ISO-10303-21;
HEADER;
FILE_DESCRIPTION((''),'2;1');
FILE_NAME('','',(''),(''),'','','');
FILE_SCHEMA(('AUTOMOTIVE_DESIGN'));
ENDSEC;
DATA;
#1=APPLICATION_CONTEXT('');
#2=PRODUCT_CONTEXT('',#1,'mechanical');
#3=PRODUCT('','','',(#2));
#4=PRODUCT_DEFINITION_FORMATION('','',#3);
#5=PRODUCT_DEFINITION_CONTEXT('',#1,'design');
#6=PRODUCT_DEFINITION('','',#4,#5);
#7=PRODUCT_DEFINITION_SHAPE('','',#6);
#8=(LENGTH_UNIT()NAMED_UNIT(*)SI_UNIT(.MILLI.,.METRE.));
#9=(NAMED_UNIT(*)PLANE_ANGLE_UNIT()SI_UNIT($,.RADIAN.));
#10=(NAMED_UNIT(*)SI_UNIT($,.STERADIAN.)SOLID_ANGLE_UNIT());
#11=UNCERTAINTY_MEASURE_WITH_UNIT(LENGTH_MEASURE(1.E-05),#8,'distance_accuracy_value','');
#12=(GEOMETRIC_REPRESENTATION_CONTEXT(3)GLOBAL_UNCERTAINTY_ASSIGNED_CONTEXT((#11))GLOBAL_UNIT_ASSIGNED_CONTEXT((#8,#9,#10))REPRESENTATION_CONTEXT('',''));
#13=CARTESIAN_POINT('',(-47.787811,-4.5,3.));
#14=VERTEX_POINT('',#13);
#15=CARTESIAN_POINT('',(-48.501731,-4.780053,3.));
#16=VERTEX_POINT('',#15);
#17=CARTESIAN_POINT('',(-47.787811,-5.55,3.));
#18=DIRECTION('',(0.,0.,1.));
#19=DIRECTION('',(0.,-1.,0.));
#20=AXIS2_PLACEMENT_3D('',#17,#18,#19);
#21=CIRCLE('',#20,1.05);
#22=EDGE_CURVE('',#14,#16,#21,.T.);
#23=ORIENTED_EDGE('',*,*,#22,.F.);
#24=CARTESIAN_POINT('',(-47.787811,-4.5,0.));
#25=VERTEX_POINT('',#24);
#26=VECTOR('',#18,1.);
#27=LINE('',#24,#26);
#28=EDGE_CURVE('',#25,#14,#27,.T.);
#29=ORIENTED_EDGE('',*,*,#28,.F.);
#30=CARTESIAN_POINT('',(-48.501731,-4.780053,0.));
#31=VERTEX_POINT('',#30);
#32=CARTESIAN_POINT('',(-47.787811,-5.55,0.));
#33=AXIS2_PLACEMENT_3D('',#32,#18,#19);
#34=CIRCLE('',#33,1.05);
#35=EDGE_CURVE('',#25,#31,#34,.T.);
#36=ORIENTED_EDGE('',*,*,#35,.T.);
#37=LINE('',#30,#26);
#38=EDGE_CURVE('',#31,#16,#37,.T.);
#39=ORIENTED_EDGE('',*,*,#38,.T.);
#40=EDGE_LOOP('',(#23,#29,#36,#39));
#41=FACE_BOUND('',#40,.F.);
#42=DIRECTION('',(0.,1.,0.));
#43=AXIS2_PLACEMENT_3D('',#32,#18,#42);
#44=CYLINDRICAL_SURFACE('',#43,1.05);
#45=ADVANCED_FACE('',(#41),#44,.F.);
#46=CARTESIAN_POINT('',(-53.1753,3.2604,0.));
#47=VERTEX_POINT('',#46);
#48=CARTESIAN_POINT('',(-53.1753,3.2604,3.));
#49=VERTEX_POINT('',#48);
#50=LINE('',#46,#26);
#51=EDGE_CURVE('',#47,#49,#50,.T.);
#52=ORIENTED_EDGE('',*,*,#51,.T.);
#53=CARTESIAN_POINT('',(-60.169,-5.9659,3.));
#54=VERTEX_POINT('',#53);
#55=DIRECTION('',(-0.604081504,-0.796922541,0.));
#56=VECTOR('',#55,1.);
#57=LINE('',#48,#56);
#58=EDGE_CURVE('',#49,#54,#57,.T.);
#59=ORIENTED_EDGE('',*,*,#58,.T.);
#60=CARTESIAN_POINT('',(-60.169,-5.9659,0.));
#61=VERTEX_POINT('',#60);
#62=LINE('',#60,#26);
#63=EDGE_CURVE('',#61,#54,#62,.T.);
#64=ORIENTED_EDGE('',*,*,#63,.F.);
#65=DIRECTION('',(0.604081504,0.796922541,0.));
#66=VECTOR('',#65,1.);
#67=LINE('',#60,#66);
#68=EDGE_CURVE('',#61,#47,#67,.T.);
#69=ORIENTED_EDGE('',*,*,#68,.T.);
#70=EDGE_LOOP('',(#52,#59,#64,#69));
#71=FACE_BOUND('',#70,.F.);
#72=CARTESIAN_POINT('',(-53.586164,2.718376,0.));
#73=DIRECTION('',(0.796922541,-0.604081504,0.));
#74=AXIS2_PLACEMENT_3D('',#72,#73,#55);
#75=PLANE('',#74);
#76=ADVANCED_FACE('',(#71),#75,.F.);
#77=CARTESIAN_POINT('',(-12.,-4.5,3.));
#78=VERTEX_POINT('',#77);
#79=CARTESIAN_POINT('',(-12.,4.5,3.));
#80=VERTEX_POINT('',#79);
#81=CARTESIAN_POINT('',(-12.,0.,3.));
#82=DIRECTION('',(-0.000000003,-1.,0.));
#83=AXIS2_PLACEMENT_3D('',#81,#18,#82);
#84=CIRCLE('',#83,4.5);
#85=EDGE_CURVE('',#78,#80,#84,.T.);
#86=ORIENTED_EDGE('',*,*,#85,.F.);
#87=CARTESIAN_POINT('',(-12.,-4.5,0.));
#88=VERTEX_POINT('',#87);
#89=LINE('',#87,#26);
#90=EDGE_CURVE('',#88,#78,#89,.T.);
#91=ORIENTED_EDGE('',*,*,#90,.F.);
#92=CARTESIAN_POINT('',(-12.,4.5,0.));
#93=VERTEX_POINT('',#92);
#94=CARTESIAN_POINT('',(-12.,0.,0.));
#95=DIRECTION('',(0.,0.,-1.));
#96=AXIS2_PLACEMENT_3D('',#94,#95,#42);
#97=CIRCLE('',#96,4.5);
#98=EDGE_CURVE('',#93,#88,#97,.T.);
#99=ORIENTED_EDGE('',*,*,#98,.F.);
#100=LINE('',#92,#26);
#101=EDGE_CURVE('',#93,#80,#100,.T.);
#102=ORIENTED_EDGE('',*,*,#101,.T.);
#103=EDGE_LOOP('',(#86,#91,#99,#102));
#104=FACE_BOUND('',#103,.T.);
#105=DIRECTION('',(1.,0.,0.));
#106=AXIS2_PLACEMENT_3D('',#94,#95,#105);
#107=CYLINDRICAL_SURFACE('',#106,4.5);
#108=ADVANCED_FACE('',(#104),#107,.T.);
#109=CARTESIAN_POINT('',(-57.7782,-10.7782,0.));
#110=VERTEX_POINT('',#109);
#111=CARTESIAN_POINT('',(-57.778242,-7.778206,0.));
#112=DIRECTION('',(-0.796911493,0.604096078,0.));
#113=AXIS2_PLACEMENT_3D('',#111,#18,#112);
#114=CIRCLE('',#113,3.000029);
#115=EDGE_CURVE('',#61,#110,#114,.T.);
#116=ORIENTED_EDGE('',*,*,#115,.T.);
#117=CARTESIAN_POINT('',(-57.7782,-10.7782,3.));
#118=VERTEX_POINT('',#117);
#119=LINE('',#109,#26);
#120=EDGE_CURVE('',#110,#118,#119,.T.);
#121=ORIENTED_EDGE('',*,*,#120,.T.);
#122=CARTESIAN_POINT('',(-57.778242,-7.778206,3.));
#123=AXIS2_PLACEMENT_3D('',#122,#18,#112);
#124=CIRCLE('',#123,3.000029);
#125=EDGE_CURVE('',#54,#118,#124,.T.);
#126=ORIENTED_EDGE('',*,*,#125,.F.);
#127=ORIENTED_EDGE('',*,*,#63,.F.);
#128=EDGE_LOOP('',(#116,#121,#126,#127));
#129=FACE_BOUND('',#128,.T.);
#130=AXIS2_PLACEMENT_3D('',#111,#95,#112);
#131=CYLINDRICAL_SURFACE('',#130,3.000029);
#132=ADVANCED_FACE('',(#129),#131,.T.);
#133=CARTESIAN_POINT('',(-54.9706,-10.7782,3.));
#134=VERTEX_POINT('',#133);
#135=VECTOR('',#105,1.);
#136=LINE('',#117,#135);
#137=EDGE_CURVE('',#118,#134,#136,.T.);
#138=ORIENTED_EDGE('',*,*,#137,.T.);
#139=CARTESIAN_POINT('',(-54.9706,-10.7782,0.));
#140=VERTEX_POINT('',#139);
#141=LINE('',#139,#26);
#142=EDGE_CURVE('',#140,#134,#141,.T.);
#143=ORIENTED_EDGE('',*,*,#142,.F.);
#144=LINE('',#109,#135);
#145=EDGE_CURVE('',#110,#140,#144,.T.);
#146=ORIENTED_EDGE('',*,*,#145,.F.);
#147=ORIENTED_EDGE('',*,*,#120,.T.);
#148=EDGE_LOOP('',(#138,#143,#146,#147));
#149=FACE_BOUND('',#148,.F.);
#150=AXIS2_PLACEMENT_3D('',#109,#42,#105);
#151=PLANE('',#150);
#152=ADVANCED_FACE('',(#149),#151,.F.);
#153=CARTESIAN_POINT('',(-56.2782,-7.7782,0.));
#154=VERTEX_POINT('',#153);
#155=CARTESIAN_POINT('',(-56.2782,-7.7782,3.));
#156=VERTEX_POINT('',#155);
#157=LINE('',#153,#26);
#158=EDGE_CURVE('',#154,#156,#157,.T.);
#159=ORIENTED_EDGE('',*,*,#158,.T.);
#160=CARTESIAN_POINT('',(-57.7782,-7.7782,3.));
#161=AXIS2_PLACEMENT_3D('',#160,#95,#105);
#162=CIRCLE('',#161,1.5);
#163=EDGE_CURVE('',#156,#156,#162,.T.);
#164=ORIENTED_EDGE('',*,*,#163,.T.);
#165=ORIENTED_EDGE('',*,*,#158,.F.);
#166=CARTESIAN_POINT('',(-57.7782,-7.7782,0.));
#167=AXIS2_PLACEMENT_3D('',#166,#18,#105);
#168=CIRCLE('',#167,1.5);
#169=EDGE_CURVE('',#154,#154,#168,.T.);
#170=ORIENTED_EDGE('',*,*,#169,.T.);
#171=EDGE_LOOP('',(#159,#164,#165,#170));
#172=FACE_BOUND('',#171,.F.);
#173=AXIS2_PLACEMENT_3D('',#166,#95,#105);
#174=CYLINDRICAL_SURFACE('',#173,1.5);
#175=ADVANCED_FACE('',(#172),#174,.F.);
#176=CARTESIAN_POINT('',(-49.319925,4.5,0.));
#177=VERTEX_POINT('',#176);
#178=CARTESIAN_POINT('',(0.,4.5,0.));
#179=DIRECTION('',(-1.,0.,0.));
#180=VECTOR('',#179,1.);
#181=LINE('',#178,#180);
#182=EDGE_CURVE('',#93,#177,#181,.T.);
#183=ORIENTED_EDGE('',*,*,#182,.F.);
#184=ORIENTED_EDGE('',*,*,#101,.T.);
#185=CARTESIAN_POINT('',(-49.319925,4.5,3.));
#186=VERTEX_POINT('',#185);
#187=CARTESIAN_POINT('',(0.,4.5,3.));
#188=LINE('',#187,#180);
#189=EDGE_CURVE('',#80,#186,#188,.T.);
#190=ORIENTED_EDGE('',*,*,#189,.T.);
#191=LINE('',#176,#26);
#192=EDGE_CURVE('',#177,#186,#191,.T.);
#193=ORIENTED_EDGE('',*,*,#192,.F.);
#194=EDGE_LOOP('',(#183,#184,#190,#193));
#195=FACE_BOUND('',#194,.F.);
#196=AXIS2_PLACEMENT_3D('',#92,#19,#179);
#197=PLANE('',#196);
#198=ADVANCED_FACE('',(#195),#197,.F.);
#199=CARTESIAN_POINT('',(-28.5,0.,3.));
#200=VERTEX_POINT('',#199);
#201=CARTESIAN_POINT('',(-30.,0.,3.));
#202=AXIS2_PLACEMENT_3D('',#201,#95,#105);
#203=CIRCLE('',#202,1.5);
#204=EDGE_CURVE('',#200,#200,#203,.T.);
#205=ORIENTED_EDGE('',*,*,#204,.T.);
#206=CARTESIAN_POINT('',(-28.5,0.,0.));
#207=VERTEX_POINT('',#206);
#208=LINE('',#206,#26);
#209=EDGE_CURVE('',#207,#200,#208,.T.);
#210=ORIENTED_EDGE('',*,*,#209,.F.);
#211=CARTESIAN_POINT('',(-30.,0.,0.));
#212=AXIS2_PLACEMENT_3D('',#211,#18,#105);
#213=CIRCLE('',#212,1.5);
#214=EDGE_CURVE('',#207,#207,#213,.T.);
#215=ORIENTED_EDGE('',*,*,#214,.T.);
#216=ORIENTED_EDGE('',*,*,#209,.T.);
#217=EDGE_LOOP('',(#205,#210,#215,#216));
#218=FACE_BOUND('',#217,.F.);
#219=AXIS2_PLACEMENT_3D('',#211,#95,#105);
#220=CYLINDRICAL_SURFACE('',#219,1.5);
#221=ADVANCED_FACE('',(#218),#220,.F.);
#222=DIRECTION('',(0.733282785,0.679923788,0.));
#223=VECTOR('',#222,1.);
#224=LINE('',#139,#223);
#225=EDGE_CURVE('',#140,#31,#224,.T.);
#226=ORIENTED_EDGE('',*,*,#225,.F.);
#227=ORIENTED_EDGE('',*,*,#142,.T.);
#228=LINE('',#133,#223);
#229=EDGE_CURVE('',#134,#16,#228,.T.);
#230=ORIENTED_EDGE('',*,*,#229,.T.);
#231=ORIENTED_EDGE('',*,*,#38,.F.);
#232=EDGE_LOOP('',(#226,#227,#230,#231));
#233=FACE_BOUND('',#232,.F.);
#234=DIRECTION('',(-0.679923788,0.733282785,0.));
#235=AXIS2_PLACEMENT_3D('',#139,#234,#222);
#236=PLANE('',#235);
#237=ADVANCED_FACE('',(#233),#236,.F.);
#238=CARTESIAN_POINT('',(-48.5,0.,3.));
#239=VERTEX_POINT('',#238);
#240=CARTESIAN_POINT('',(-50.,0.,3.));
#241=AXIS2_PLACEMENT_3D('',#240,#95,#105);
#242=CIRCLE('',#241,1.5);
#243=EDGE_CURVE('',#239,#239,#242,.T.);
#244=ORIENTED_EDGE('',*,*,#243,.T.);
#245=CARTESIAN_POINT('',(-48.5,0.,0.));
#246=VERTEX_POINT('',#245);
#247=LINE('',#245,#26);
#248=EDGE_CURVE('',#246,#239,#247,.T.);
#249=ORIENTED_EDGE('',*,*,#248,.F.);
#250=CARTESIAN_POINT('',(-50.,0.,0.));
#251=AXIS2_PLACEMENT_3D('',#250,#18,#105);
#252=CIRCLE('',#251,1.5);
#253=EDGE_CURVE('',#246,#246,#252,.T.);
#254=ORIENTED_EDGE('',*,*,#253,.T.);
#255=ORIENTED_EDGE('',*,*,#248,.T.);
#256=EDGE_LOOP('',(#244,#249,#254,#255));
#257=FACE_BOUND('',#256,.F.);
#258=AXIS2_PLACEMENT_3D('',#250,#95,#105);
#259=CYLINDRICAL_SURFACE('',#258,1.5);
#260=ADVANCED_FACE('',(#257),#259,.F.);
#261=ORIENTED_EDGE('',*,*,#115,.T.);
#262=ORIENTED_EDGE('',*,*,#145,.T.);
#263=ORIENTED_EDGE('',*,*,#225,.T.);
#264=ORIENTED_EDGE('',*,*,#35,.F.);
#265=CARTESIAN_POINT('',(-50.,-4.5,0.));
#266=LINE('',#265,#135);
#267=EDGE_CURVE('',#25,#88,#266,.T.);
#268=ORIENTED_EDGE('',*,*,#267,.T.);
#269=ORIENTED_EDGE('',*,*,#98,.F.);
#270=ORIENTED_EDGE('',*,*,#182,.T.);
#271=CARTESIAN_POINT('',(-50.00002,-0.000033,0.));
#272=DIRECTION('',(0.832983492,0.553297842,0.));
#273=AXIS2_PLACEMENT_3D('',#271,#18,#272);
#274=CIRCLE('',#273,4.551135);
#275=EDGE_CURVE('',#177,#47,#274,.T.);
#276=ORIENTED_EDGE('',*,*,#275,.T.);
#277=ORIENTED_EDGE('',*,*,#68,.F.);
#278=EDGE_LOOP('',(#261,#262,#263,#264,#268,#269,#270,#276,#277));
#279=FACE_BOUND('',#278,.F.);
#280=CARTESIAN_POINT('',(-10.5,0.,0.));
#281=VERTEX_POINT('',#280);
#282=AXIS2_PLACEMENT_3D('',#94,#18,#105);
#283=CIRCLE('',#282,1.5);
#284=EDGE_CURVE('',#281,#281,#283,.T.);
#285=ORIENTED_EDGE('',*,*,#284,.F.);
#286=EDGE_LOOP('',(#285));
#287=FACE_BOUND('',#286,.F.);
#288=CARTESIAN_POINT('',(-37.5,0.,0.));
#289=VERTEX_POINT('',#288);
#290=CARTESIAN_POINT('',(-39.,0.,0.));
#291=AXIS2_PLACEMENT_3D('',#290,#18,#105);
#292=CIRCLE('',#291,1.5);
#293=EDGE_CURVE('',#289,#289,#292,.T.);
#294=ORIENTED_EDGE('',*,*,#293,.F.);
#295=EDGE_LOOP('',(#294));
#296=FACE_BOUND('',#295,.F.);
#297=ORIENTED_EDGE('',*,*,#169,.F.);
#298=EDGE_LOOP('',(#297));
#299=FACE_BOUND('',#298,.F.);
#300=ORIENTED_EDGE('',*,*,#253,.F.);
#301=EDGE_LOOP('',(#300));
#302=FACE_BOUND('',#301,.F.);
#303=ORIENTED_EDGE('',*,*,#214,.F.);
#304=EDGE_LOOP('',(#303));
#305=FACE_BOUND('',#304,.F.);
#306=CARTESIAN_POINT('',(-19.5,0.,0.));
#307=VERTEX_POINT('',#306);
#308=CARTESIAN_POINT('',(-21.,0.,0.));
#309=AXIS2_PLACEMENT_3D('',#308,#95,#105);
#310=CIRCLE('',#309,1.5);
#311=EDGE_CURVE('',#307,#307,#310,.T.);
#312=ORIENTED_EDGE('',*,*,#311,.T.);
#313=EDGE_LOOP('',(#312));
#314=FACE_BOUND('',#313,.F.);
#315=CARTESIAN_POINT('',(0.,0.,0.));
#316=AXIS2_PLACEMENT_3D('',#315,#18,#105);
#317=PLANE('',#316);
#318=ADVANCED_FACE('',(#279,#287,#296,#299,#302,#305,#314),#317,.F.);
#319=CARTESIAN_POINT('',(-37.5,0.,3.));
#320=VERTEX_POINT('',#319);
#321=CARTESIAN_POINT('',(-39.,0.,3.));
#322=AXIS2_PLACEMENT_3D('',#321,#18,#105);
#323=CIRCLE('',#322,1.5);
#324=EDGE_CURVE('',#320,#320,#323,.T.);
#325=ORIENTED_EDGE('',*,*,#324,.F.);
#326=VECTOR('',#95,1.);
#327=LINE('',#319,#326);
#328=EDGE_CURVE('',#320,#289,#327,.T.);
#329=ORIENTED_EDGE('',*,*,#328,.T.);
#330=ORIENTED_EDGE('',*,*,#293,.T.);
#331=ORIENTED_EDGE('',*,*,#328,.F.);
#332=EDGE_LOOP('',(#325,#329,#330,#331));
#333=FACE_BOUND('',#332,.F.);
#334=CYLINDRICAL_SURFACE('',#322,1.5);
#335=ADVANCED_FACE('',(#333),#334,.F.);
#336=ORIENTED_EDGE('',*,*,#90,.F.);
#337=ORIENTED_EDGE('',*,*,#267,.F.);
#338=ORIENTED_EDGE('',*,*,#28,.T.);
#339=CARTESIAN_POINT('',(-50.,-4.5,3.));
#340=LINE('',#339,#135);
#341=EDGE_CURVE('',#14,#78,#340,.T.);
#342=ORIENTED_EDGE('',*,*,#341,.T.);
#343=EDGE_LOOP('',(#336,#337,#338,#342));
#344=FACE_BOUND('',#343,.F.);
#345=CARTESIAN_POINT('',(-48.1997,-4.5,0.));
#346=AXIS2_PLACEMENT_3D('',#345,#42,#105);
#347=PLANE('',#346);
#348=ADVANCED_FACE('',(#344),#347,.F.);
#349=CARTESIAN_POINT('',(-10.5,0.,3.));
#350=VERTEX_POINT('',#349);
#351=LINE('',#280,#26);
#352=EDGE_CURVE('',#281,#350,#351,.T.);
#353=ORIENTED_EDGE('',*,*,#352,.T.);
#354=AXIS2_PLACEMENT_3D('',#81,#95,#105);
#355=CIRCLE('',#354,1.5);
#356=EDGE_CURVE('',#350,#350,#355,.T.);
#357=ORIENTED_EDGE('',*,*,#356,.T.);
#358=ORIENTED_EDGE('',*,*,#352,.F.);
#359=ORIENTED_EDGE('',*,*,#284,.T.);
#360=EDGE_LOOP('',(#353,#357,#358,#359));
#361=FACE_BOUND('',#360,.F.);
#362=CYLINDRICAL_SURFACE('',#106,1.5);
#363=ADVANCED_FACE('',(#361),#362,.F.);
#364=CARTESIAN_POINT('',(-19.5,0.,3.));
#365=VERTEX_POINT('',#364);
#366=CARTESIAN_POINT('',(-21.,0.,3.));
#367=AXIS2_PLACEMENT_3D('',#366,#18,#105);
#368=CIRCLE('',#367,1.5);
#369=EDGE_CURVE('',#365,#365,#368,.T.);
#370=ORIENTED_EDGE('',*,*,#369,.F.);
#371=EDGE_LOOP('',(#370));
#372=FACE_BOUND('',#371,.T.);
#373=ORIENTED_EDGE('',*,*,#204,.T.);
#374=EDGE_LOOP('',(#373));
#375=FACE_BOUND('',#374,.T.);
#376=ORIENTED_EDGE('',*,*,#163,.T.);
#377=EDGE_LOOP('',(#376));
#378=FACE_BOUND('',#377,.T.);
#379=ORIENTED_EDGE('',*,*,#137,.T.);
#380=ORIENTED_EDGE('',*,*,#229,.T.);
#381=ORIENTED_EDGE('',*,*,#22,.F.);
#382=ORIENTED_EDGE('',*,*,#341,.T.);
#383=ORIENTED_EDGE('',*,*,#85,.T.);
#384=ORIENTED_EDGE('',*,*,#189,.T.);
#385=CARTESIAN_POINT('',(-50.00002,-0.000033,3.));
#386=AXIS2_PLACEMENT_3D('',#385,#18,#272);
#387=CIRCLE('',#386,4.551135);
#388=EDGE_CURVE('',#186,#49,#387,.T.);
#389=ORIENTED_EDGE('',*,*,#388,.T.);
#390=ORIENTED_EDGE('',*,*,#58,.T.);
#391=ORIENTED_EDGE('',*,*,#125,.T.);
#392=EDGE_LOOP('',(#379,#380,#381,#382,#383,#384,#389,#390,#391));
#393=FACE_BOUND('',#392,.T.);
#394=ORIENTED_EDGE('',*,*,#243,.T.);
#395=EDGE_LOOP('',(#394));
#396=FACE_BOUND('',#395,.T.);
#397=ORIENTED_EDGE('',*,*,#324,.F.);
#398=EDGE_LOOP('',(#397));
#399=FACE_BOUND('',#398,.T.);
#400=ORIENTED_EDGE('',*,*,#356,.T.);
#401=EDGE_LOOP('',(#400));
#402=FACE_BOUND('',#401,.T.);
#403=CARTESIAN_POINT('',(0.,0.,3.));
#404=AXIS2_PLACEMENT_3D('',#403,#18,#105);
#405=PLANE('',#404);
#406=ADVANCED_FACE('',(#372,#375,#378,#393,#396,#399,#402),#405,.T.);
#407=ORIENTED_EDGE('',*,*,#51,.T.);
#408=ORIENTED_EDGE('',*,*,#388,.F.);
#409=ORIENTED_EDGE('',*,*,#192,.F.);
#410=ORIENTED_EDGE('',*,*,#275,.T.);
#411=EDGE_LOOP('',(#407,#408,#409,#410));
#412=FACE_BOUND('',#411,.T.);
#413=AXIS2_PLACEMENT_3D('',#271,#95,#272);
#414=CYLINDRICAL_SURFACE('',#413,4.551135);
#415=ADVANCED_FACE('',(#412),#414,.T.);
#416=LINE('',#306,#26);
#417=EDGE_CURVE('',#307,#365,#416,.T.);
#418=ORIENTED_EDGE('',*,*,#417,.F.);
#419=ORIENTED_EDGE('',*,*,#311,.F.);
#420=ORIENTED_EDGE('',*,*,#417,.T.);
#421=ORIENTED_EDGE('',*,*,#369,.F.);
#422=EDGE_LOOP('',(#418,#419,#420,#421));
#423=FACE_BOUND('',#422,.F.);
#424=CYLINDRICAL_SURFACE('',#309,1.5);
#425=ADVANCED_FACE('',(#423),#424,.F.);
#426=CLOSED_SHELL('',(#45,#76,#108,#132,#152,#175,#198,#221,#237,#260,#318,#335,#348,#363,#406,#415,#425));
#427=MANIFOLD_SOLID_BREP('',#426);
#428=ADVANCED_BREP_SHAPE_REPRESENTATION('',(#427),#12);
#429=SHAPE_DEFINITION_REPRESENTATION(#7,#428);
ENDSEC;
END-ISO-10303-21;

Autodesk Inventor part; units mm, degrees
ref_plane "YZ Plane" through (0, 0, 0) normal (1, 0, 0) x (0, 1, 0)
ref_plane "XZ Plane" through (0, 0, 0) normal (0, 1, 0) x (-1, 0, 0)
ref_plane "XY Plane" through (0, 0, 0) normal (0, 0, 1) x (1, 0, 0)
sketch "スケッチ1" plane through (0, 0, 0) normal (0, 0, 1) x (1, 0, 0)
  circle A0 centre (-55, 0) radius 8.025 construction
  circle A1 centre (0, 0) radius 1.25 construction
  arc A2 (-44.5788, 6) -> (-63.6661, 8.3366) centre (-55, 0) ccw construction
  line L0 (-63.6661, 8.3366) -> (-109.1623, -38.9576) construction
  line L1 (-102.7709, -46.5745) -> (-48.2949, -9.9821) construction
  arc A3 (-48.2949, -9.9821) -> (-44.5788, -6) centre (-55, 0) ccw construction
  line L2 (-44.5788, -6) -> (-5.2915, -6) construction
  arc A4 (-5.2915, -6) -> (-5.2915, 6) centre (0, 0) ccw construction
  line L3 (-5.2915, 6) -> (-44.5788, 6) construction
  circle A5 centre (0, 0) radius 1.5
  circle A6 centre (-30, 0) radius 1.5
  circle A7 centre (-12, 0) radius 1.5
  circle A8 centre (-21, 0) radius 1.5
  line L4 (-30, 0) -> (0, 0)
  line L5 (-30, 0) -> (-50, 0)
  line L6 (-50, 0) -> (-30, 0)
  circle A9 centre (-50, 0) radius 1.5
  circle A10 centre (-50, 0) radius 4.025 construction
  circle A11 centre (-50, 0) radius 7.125 construction
  circle A12 centre (-57.7782, -7.7782) radius 1.5
  circle A13 centre (-57.7782, -7.7782) radius 3 construction
  line L7 (-50, 0) -> (-57.7782, -7.7782) construction
  line L8 (-53.1753, 3.2604) -> (-60.169, -5.9659)
  line L9 (-55.3874, -9.5904) -> (-46.209, 2.5181)
  arc A14 (-46.209, 2.5181) -> (-53.1753, 3.2604) centre (-50, 0) ccw
  arc A15 (-60.169, -5.9659) -> (-55.3874, -9.5904) centre (-57.7782, -7.7782) ccw
  line L10 (-50, 0) -> (0, 0) construction
  line L11 (-50, -4.5) -> (0, -4.5)
  line L12 (0, 4.5) -> (-50, 4.5)
  arc A16 (-50, 4.5) -> (-50, -4.5) centre (-50, 0) ccw
  arc A17 (0, -4.5) -> (0, 4.5) centre (0, 0) ccw
  line L13 (-57.7782, -10.7782) -> (-54.9706, -10.7782)
  line L14 (-54.9706, -10.7782) -> (-48.1997, -4.5)
  line L15 (-50, 0) -> (-57.7782, -7.7782)
  circle A18 centre (-12, 0) radius 4.5
  point P0 (-53.8891, -3.8891)
  point P1 (-25, 0)
  point P2 (-48.7574, -3)
  point P3 (-49.3198, 4.5)
  point P4 (-53.5862, 2.7184)
  point P5 (-51.3675, -4.2872)
  point P6 (-12, -4.5)
  point P7 (-12, 4.5)
  dimension "d25" = 3
  dimension "d26" = 0
  dimension "d0" = 20
  dimension "d2" = 3
  dimension "d3" = 8.05
  dimension "d4" = 3.1
  dimension "d5" = 30
  dimension "d6" = 3
  dimension "d7" = 3
  dimension "d8" = 3
  dimension "d9" = 3
  dimension "d11" = 9
  dimension "d13" = 3
  dimension "d14" = 6
  dimension "d15" = 6
  dimension "d16" = 9
  dimension "d21" = 135
  dimension "d22" = 10
  dimension "d30" = 9
  dimension "d31" = 11
extrude "押し出し1" add sketch "スケッチ1" along normal blind 3 contours L4 A8 A18 L11 A16 L9 L5 A6 | A6 L5 L9 A14 L12 A18 L4 A8 | L9 A9 L5 | L5 A9 L15 A16 L12 A14 L9 | L9 A16 L15 A9 | A18 L4 A7 | L4 A7 A18 | A16 L11 L14 L13 A15 L9 | L9 A15 L8 A16 | L12 A16 L8 A14
fillet "フィレット1" radius 1.05 1 edges at (-48.1997, -4.5, 1.5)
sketch "スケッチ2" plane through (0, 0, 3) normal (0, 0, 1) x (1, 0, 0)
  arc A0 (-60.7927, -6.5251) -> (-59.7797, -5.8711) centre (-60.7525, -5.4759) ccw
  arc A1 (-55.3849, -4.4725) -> (-59.7797, -5.8711) centre (-57.0004, -7.0004) ccw
  arc A2 (-55.3849, -4.4725) -> (-43.7567, 3.1657) centre (-50, 0) ccw
  arc A3 (-44.0452, 4.6286) -> (-43.7567, 3.1657) centre (-43.1001, 4.055) ccw
  line L0 (-44.0452, 4.6286) -> (-41.5381, 8.9709)
  arc A4 (-41.5381, 8.9709) -> (-46.5567, 11.6351) centre (-44, 10.3923) ccw
  line L1 (-46.5567, 11.6351) -> (-49.0637, 7.2927)
  arc A5 (-50.5985, 6.9744) -> (-49.0637, 7.2927) centre (-49.9731, 7.8177) ccw
  arc A6 (-50.5985, 6.9744) -> (-50.2678, 6.9949) centre (-50, 0) ccw
  circle A7 centre (-50, 0) radius 4.025
  circle A8 centre (-50, 0) radius 1.5 projected
  circle A9 centre (-39, 0) radius 4
  line L2 (-50, 0) -> (-38.3804, 0)
  circle A10 centre (-39, 0) radius 1.5
  circle A11 centre (-30, 0) radius 1.5 projected
  point P0 (0, 0)
  point P1 (-43.3711, 2.3255)
  point P2 (-43, 0)
  point P3 (-49.3534, 6.9701)
  point P4 (-44.1966, 3.9141)
  point P5 (-43.7567, 3.1657)
  dimension "d23" = 12
  dimension "d24" = 8
  dimension "d27" = 3
  dimension "d28" = 9
  dimension "d29" = 7
extrude "押し出し2" cut sketch "スケッチ2" against normal blind 3 contours A10
properties part number "中間節アーム先端締結パーツipt" material "アルミニウム 7075"
